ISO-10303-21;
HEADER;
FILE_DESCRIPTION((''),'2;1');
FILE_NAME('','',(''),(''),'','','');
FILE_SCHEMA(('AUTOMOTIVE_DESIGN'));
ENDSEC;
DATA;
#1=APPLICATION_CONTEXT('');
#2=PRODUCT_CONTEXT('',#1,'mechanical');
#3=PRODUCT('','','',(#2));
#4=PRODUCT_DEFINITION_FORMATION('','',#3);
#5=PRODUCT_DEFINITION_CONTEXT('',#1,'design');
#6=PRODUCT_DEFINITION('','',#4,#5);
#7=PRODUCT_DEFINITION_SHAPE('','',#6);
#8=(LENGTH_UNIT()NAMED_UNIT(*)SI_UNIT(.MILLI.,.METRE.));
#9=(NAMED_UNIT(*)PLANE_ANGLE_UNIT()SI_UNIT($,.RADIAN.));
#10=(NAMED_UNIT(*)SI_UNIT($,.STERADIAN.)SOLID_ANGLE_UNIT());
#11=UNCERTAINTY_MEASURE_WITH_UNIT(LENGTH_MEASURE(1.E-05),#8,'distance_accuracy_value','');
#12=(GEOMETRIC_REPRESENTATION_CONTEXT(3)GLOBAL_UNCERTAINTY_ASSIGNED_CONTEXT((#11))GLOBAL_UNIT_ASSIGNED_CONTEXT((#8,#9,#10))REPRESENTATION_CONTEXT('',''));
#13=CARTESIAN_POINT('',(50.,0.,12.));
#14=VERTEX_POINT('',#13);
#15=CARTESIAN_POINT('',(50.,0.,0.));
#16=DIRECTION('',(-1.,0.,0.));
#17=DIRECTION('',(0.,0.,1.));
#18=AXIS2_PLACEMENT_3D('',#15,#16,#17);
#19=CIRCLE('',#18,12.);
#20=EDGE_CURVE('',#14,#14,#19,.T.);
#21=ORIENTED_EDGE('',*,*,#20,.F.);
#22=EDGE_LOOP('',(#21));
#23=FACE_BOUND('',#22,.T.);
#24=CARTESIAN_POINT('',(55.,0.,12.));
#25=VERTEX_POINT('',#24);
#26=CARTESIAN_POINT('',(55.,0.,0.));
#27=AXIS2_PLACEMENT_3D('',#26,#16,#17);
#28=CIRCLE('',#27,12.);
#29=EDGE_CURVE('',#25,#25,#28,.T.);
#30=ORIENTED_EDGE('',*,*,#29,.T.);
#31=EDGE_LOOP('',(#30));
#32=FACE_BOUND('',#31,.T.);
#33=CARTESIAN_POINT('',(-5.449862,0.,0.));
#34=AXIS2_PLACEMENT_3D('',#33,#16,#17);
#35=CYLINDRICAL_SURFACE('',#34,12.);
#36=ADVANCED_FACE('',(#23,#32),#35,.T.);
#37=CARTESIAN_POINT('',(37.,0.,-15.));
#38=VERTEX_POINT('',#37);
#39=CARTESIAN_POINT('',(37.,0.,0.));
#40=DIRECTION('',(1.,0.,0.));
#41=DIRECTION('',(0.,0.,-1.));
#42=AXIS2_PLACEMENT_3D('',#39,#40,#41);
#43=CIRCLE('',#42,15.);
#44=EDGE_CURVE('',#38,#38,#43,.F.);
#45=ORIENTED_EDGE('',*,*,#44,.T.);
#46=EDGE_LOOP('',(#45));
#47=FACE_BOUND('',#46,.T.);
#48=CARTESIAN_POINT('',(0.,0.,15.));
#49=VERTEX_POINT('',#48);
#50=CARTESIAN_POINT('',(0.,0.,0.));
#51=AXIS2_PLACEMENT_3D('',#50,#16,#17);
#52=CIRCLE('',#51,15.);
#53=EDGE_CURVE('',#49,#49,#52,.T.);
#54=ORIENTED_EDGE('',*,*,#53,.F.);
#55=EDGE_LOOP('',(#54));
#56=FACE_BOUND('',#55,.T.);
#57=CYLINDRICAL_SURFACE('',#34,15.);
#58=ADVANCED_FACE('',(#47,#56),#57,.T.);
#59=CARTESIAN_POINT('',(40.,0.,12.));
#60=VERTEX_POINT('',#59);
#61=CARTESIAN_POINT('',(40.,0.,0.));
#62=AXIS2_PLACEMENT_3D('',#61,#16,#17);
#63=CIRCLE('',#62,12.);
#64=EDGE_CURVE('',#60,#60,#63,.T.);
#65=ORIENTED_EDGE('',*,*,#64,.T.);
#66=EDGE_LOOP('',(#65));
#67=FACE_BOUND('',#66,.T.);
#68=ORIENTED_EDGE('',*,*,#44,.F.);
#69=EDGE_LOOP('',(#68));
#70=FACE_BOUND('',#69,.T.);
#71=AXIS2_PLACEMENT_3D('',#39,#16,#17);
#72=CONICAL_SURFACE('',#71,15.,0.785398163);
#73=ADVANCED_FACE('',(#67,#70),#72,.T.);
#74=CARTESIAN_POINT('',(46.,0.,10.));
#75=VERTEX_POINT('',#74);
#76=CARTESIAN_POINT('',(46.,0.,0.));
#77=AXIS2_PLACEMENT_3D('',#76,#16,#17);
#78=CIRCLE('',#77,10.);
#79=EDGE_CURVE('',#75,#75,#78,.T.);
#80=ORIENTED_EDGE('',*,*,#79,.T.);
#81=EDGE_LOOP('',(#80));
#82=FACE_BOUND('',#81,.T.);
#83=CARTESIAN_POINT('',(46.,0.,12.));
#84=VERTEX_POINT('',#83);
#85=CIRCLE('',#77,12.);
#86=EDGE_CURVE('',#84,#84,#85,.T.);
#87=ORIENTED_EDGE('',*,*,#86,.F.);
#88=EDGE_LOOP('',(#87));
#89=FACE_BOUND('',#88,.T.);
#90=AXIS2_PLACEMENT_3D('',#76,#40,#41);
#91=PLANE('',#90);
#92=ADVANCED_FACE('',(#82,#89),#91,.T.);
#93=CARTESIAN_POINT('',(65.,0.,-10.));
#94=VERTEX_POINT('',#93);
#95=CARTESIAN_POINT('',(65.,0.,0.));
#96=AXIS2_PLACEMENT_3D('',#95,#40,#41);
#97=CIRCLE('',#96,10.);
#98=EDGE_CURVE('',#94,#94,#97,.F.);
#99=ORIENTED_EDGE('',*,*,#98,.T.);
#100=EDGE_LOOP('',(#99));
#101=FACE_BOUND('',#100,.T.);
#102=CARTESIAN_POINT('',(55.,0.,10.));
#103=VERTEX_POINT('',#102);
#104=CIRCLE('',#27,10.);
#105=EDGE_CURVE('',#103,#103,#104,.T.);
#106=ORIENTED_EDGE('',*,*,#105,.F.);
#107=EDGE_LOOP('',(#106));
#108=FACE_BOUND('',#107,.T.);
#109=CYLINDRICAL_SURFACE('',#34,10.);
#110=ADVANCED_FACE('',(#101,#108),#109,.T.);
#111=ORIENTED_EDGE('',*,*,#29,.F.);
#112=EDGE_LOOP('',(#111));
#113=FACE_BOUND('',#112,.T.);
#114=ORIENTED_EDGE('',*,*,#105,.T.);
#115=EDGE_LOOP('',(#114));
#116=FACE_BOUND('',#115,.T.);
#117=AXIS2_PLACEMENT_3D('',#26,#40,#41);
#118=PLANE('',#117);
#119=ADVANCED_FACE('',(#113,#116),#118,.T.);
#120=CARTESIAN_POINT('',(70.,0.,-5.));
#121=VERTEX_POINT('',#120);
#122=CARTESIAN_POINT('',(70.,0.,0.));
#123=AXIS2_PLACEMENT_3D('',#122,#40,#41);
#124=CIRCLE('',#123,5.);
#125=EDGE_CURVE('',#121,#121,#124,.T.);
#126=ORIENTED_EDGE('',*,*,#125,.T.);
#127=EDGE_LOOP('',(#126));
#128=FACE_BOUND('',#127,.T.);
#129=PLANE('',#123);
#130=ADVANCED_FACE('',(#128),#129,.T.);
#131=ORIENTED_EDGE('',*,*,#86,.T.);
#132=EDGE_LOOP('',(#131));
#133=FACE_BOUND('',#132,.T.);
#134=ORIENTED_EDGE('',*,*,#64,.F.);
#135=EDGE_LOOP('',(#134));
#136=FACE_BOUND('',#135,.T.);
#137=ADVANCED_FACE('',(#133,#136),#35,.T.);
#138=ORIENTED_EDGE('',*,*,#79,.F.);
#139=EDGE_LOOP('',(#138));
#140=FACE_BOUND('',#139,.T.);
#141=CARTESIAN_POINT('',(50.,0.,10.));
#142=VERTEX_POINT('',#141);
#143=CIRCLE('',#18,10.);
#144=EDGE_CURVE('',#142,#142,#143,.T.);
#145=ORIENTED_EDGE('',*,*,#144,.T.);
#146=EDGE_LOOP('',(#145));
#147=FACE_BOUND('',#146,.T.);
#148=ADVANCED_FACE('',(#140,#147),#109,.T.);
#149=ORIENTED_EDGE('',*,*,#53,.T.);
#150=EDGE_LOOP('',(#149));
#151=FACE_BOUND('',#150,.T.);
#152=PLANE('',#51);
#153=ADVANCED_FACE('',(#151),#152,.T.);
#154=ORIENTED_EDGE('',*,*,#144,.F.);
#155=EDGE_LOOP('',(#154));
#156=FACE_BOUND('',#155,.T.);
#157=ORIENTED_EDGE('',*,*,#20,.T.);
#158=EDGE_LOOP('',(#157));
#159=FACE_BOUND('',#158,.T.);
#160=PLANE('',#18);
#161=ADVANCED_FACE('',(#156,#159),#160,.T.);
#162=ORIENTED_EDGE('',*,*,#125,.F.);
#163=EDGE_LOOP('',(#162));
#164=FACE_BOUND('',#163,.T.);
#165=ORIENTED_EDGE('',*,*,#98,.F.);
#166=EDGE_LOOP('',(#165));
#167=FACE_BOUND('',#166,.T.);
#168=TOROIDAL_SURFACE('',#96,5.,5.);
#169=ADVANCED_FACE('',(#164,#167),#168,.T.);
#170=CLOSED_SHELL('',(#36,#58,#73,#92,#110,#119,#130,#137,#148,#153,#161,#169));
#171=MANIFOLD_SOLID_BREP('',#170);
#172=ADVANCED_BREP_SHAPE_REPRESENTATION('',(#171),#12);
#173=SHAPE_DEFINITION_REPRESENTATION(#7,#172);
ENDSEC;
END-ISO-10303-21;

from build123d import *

# Parameters (mm, degrees)
ZAOBLIT1_R    = 5
ZKOSEN_1_SIZE = 3


with BuildPart() as part:
    # Skica1 → Rotovat1 (revolve)
    with BuildSketch(Plane.XY, mode=Mode.PRIVATE) as rotovat1_sk:
        Polygon((0, 15), (0, 0), (70, 0), (70, 10), (55, 10), (55, 12), (50, 12), (50, 10), (46, 10), (46, 12), (40, 12), (40, 15), align=None)
    revolve(rotovat1_sk.sketch.rotate(Axis((-5.449862177, 0, 0), (1, 0, 0)), 90), axis=Axis((-5.449862177, 0, 0), (1, 0, 0)))

    # Zaoblit1
    zaoblit1_edges = [part.edges().sort_by_distance(p)[0] for p in [
        (70, 0, -10),
    ]]
    fillet(zaoblit1_edges, radius=ZAOBLIT1_R)

    # Zkosení1
    zkosen_1_edges = [part.edges().sort_by_distance(p)[0] for p in [
        (40, 0, -15),
    ]]
    chamfer(zkosen_1_edges, length=ZKOSEN_1_SIZE - 0.0001)  # a hair under: the kernel refuses the full size


solid = part.part
